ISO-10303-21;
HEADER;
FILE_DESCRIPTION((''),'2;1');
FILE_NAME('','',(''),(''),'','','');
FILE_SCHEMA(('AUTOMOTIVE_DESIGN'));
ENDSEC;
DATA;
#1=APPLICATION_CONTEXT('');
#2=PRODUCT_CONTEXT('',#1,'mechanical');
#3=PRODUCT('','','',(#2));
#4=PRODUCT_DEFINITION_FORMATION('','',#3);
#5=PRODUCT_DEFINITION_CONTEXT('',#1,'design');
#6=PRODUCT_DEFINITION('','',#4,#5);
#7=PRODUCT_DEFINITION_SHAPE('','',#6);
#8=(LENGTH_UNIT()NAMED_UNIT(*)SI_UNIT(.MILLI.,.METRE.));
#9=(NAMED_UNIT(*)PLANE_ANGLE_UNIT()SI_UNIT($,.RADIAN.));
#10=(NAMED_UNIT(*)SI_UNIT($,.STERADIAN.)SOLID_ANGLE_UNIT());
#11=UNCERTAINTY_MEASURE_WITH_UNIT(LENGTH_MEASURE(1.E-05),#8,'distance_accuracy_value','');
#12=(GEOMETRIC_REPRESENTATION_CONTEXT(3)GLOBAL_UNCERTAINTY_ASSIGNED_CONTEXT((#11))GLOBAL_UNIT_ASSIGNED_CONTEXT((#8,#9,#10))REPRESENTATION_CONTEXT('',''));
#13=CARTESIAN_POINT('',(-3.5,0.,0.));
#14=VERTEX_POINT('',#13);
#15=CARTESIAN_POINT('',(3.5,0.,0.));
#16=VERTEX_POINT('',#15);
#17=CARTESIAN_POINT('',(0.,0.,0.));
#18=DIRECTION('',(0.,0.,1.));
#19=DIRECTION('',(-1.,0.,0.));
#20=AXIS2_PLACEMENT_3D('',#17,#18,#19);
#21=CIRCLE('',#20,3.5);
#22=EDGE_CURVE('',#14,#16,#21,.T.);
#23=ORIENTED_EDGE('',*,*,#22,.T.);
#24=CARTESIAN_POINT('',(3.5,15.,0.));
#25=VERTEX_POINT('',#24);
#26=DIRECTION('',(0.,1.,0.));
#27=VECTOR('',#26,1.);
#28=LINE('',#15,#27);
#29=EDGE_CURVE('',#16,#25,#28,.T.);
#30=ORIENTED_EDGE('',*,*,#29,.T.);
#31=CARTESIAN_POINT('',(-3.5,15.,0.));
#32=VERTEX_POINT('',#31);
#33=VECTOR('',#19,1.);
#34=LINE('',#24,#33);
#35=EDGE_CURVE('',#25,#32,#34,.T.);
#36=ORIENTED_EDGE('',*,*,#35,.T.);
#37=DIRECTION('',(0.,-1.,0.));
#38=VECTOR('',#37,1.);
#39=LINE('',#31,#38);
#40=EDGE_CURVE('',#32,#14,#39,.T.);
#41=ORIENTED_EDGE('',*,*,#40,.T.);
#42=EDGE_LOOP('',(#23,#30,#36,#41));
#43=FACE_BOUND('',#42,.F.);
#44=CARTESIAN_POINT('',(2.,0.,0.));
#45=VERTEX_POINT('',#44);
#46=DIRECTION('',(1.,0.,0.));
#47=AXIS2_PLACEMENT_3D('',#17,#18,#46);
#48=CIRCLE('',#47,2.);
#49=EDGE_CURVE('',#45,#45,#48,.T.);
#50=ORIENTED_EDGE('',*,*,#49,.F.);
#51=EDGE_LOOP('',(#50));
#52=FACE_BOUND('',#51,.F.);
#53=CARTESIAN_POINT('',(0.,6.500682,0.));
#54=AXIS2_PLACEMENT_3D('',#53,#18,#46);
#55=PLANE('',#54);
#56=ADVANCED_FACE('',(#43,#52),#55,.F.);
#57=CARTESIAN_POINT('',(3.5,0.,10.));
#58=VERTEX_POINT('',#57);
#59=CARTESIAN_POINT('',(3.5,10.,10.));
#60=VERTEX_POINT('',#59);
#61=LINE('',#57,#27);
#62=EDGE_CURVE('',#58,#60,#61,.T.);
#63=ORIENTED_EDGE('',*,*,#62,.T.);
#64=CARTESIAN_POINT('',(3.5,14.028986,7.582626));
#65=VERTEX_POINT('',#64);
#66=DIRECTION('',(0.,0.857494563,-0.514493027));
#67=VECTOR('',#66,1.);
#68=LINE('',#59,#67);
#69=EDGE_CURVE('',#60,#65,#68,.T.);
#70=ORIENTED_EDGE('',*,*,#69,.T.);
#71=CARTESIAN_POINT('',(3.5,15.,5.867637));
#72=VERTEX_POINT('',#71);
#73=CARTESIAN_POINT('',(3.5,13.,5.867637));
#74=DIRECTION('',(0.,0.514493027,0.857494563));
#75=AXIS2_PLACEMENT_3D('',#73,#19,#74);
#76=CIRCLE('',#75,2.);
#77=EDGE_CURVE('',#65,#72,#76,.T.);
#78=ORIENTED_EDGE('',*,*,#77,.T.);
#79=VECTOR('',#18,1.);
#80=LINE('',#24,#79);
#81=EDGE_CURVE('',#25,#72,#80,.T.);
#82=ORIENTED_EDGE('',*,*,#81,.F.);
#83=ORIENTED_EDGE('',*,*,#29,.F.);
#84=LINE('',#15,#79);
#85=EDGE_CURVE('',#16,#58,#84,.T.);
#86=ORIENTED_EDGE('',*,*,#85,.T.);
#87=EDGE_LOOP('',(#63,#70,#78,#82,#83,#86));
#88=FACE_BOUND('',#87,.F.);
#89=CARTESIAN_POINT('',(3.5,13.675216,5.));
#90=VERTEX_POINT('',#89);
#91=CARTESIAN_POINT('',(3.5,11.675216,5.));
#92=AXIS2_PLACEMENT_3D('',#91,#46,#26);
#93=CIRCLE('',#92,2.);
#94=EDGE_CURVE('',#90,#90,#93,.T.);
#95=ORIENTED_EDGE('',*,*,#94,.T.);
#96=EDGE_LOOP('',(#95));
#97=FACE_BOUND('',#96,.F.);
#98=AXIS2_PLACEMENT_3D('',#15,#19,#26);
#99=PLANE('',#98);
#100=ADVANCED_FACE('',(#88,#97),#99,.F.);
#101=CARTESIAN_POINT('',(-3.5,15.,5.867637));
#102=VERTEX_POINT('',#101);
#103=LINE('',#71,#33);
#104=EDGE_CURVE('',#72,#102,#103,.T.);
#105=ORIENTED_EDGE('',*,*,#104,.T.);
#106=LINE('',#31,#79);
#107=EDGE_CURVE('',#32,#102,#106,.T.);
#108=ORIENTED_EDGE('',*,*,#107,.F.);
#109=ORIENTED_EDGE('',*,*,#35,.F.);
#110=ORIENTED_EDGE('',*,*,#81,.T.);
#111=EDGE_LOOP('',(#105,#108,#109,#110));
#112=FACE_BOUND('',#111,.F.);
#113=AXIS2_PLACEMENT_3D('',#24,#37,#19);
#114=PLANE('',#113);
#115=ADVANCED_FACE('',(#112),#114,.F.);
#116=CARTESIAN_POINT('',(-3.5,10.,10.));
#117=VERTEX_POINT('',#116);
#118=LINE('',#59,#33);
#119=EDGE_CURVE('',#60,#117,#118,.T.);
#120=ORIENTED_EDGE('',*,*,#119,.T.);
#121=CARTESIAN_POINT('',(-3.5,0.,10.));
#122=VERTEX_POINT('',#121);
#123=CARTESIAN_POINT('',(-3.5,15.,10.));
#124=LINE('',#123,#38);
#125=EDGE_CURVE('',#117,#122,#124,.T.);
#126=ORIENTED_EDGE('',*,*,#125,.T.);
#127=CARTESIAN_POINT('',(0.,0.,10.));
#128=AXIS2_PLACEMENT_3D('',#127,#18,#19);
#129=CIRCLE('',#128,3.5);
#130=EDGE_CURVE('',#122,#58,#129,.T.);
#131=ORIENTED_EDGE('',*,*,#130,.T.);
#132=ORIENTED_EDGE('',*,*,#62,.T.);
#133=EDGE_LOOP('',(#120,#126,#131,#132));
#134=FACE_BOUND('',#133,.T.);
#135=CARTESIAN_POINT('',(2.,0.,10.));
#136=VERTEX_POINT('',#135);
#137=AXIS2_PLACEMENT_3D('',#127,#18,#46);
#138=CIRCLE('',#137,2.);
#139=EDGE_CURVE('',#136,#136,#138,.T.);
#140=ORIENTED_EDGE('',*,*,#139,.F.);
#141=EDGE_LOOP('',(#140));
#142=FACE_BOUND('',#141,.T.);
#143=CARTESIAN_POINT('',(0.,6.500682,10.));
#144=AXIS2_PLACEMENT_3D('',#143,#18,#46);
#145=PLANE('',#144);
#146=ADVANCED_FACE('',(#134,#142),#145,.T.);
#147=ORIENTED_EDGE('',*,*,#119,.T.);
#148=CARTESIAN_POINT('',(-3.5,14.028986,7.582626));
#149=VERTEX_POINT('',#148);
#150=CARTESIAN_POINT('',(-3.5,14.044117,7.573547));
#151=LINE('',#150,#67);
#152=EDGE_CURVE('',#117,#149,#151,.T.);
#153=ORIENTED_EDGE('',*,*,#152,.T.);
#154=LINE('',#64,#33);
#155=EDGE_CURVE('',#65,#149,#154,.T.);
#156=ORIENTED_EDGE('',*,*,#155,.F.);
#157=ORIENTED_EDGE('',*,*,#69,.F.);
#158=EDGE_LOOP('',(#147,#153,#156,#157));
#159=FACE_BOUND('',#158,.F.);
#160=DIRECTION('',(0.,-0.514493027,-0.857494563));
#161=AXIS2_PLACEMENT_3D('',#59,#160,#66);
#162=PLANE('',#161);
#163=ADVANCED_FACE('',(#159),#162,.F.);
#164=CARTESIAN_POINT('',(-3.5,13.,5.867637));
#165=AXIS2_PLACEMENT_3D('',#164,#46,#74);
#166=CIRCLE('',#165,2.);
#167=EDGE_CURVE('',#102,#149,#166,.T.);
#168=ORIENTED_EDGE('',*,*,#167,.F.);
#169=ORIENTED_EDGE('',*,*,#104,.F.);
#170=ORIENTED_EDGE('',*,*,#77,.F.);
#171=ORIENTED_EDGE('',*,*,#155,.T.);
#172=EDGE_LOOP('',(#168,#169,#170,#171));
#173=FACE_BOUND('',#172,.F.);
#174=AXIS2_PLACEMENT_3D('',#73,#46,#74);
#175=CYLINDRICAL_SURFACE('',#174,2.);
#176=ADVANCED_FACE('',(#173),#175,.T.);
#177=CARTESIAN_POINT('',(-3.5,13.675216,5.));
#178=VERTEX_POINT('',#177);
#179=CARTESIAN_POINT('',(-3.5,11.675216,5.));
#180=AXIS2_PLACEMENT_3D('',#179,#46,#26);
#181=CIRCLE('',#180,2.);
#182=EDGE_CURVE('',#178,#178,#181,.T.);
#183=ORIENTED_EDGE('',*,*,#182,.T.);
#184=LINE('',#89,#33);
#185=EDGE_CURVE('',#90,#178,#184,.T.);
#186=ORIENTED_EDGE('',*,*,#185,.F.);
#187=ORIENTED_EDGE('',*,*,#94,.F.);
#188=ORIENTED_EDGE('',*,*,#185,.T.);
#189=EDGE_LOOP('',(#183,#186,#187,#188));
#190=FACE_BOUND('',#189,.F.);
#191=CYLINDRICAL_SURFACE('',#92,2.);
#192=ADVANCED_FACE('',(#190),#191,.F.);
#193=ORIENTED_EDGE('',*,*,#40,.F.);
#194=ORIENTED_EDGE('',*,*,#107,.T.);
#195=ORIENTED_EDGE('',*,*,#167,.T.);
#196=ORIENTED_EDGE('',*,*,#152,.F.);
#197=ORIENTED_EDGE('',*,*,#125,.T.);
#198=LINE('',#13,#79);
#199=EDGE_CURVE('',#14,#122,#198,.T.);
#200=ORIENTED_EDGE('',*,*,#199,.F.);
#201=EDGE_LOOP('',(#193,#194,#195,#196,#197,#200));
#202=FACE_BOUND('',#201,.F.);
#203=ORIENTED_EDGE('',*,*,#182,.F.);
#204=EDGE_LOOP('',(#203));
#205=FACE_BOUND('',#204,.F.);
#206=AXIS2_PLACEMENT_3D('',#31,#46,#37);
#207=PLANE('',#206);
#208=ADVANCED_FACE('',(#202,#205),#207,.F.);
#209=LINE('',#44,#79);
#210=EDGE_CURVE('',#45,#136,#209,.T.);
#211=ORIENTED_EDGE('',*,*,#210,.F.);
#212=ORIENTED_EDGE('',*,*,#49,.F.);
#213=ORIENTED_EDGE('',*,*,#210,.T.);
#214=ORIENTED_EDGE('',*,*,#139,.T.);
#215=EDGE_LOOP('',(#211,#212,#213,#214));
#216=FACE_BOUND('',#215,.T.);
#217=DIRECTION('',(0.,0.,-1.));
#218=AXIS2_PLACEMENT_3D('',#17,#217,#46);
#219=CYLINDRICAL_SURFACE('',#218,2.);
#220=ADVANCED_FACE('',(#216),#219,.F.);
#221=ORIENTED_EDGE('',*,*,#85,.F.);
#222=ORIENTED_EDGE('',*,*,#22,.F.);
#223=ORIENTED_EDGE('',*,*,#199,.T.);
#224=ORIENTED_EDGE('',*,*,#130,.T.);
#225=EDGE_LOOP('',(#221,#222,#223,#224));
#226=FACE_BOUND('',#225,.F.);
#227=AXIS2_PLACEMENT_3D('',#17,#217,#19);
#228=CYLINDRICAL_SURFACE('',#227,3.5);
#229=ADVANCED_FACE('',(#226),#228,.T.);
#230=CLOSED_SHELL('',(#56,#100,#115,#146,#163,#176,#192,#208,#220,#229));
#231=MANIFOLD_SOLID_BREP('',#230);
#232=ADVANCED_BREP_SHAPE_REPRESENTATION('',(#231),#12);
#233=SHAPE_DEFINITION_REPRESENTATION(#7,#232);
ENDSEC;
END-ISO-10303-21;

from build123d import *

# Parameters (mm, degrees)
F0_R     = 2
F1_DEPTH = 10
F2_R     = 2
F3_DEPTH = 25


# Not quite as in the source:
# - a feature names something its author has since deleted; it is built from what else it names


with BuildPart() as f1:
    # F0 (on Top) → F1 (new body)
    with BuildSketch(Plane.XY):
        with BuildLine():
            Line((-3.5, 15), (-3.5, 0))
            ThreePointArc((-3.5, 0), (0, -3.5), (3.5, 0))
            Line((3.5, 0), (3.5, 15))
            Line((3.5, 15), (-3.5, 15))
        make_face()
        Circle(F0_R, mode=Mode.SUBTRACT)
    extrude(amount=F1_DEPTH)

    # F2 (on face) → F3 (cut)
    with BuildSketch(Plane.YZ.offset(3.5)):
        with Locations((11.6752159595, 5)):
            Circle(F2_R)
        with BuildLine():
            ThreePointArc((14.028986054, 7.5826258022), (14.7403982458, 6.8530370755), (15, 5.8676366767))
            Line((15, 5.8676366767), (15, 10))
            Line((15, 10), (10, 10))
            Line((10, 10), (14.028986054, 7.5826258022))
        make_face()
    extrude(amount=-F3_DEPTH, mode=Mode.SUBTRACT)


solid = f1.part
